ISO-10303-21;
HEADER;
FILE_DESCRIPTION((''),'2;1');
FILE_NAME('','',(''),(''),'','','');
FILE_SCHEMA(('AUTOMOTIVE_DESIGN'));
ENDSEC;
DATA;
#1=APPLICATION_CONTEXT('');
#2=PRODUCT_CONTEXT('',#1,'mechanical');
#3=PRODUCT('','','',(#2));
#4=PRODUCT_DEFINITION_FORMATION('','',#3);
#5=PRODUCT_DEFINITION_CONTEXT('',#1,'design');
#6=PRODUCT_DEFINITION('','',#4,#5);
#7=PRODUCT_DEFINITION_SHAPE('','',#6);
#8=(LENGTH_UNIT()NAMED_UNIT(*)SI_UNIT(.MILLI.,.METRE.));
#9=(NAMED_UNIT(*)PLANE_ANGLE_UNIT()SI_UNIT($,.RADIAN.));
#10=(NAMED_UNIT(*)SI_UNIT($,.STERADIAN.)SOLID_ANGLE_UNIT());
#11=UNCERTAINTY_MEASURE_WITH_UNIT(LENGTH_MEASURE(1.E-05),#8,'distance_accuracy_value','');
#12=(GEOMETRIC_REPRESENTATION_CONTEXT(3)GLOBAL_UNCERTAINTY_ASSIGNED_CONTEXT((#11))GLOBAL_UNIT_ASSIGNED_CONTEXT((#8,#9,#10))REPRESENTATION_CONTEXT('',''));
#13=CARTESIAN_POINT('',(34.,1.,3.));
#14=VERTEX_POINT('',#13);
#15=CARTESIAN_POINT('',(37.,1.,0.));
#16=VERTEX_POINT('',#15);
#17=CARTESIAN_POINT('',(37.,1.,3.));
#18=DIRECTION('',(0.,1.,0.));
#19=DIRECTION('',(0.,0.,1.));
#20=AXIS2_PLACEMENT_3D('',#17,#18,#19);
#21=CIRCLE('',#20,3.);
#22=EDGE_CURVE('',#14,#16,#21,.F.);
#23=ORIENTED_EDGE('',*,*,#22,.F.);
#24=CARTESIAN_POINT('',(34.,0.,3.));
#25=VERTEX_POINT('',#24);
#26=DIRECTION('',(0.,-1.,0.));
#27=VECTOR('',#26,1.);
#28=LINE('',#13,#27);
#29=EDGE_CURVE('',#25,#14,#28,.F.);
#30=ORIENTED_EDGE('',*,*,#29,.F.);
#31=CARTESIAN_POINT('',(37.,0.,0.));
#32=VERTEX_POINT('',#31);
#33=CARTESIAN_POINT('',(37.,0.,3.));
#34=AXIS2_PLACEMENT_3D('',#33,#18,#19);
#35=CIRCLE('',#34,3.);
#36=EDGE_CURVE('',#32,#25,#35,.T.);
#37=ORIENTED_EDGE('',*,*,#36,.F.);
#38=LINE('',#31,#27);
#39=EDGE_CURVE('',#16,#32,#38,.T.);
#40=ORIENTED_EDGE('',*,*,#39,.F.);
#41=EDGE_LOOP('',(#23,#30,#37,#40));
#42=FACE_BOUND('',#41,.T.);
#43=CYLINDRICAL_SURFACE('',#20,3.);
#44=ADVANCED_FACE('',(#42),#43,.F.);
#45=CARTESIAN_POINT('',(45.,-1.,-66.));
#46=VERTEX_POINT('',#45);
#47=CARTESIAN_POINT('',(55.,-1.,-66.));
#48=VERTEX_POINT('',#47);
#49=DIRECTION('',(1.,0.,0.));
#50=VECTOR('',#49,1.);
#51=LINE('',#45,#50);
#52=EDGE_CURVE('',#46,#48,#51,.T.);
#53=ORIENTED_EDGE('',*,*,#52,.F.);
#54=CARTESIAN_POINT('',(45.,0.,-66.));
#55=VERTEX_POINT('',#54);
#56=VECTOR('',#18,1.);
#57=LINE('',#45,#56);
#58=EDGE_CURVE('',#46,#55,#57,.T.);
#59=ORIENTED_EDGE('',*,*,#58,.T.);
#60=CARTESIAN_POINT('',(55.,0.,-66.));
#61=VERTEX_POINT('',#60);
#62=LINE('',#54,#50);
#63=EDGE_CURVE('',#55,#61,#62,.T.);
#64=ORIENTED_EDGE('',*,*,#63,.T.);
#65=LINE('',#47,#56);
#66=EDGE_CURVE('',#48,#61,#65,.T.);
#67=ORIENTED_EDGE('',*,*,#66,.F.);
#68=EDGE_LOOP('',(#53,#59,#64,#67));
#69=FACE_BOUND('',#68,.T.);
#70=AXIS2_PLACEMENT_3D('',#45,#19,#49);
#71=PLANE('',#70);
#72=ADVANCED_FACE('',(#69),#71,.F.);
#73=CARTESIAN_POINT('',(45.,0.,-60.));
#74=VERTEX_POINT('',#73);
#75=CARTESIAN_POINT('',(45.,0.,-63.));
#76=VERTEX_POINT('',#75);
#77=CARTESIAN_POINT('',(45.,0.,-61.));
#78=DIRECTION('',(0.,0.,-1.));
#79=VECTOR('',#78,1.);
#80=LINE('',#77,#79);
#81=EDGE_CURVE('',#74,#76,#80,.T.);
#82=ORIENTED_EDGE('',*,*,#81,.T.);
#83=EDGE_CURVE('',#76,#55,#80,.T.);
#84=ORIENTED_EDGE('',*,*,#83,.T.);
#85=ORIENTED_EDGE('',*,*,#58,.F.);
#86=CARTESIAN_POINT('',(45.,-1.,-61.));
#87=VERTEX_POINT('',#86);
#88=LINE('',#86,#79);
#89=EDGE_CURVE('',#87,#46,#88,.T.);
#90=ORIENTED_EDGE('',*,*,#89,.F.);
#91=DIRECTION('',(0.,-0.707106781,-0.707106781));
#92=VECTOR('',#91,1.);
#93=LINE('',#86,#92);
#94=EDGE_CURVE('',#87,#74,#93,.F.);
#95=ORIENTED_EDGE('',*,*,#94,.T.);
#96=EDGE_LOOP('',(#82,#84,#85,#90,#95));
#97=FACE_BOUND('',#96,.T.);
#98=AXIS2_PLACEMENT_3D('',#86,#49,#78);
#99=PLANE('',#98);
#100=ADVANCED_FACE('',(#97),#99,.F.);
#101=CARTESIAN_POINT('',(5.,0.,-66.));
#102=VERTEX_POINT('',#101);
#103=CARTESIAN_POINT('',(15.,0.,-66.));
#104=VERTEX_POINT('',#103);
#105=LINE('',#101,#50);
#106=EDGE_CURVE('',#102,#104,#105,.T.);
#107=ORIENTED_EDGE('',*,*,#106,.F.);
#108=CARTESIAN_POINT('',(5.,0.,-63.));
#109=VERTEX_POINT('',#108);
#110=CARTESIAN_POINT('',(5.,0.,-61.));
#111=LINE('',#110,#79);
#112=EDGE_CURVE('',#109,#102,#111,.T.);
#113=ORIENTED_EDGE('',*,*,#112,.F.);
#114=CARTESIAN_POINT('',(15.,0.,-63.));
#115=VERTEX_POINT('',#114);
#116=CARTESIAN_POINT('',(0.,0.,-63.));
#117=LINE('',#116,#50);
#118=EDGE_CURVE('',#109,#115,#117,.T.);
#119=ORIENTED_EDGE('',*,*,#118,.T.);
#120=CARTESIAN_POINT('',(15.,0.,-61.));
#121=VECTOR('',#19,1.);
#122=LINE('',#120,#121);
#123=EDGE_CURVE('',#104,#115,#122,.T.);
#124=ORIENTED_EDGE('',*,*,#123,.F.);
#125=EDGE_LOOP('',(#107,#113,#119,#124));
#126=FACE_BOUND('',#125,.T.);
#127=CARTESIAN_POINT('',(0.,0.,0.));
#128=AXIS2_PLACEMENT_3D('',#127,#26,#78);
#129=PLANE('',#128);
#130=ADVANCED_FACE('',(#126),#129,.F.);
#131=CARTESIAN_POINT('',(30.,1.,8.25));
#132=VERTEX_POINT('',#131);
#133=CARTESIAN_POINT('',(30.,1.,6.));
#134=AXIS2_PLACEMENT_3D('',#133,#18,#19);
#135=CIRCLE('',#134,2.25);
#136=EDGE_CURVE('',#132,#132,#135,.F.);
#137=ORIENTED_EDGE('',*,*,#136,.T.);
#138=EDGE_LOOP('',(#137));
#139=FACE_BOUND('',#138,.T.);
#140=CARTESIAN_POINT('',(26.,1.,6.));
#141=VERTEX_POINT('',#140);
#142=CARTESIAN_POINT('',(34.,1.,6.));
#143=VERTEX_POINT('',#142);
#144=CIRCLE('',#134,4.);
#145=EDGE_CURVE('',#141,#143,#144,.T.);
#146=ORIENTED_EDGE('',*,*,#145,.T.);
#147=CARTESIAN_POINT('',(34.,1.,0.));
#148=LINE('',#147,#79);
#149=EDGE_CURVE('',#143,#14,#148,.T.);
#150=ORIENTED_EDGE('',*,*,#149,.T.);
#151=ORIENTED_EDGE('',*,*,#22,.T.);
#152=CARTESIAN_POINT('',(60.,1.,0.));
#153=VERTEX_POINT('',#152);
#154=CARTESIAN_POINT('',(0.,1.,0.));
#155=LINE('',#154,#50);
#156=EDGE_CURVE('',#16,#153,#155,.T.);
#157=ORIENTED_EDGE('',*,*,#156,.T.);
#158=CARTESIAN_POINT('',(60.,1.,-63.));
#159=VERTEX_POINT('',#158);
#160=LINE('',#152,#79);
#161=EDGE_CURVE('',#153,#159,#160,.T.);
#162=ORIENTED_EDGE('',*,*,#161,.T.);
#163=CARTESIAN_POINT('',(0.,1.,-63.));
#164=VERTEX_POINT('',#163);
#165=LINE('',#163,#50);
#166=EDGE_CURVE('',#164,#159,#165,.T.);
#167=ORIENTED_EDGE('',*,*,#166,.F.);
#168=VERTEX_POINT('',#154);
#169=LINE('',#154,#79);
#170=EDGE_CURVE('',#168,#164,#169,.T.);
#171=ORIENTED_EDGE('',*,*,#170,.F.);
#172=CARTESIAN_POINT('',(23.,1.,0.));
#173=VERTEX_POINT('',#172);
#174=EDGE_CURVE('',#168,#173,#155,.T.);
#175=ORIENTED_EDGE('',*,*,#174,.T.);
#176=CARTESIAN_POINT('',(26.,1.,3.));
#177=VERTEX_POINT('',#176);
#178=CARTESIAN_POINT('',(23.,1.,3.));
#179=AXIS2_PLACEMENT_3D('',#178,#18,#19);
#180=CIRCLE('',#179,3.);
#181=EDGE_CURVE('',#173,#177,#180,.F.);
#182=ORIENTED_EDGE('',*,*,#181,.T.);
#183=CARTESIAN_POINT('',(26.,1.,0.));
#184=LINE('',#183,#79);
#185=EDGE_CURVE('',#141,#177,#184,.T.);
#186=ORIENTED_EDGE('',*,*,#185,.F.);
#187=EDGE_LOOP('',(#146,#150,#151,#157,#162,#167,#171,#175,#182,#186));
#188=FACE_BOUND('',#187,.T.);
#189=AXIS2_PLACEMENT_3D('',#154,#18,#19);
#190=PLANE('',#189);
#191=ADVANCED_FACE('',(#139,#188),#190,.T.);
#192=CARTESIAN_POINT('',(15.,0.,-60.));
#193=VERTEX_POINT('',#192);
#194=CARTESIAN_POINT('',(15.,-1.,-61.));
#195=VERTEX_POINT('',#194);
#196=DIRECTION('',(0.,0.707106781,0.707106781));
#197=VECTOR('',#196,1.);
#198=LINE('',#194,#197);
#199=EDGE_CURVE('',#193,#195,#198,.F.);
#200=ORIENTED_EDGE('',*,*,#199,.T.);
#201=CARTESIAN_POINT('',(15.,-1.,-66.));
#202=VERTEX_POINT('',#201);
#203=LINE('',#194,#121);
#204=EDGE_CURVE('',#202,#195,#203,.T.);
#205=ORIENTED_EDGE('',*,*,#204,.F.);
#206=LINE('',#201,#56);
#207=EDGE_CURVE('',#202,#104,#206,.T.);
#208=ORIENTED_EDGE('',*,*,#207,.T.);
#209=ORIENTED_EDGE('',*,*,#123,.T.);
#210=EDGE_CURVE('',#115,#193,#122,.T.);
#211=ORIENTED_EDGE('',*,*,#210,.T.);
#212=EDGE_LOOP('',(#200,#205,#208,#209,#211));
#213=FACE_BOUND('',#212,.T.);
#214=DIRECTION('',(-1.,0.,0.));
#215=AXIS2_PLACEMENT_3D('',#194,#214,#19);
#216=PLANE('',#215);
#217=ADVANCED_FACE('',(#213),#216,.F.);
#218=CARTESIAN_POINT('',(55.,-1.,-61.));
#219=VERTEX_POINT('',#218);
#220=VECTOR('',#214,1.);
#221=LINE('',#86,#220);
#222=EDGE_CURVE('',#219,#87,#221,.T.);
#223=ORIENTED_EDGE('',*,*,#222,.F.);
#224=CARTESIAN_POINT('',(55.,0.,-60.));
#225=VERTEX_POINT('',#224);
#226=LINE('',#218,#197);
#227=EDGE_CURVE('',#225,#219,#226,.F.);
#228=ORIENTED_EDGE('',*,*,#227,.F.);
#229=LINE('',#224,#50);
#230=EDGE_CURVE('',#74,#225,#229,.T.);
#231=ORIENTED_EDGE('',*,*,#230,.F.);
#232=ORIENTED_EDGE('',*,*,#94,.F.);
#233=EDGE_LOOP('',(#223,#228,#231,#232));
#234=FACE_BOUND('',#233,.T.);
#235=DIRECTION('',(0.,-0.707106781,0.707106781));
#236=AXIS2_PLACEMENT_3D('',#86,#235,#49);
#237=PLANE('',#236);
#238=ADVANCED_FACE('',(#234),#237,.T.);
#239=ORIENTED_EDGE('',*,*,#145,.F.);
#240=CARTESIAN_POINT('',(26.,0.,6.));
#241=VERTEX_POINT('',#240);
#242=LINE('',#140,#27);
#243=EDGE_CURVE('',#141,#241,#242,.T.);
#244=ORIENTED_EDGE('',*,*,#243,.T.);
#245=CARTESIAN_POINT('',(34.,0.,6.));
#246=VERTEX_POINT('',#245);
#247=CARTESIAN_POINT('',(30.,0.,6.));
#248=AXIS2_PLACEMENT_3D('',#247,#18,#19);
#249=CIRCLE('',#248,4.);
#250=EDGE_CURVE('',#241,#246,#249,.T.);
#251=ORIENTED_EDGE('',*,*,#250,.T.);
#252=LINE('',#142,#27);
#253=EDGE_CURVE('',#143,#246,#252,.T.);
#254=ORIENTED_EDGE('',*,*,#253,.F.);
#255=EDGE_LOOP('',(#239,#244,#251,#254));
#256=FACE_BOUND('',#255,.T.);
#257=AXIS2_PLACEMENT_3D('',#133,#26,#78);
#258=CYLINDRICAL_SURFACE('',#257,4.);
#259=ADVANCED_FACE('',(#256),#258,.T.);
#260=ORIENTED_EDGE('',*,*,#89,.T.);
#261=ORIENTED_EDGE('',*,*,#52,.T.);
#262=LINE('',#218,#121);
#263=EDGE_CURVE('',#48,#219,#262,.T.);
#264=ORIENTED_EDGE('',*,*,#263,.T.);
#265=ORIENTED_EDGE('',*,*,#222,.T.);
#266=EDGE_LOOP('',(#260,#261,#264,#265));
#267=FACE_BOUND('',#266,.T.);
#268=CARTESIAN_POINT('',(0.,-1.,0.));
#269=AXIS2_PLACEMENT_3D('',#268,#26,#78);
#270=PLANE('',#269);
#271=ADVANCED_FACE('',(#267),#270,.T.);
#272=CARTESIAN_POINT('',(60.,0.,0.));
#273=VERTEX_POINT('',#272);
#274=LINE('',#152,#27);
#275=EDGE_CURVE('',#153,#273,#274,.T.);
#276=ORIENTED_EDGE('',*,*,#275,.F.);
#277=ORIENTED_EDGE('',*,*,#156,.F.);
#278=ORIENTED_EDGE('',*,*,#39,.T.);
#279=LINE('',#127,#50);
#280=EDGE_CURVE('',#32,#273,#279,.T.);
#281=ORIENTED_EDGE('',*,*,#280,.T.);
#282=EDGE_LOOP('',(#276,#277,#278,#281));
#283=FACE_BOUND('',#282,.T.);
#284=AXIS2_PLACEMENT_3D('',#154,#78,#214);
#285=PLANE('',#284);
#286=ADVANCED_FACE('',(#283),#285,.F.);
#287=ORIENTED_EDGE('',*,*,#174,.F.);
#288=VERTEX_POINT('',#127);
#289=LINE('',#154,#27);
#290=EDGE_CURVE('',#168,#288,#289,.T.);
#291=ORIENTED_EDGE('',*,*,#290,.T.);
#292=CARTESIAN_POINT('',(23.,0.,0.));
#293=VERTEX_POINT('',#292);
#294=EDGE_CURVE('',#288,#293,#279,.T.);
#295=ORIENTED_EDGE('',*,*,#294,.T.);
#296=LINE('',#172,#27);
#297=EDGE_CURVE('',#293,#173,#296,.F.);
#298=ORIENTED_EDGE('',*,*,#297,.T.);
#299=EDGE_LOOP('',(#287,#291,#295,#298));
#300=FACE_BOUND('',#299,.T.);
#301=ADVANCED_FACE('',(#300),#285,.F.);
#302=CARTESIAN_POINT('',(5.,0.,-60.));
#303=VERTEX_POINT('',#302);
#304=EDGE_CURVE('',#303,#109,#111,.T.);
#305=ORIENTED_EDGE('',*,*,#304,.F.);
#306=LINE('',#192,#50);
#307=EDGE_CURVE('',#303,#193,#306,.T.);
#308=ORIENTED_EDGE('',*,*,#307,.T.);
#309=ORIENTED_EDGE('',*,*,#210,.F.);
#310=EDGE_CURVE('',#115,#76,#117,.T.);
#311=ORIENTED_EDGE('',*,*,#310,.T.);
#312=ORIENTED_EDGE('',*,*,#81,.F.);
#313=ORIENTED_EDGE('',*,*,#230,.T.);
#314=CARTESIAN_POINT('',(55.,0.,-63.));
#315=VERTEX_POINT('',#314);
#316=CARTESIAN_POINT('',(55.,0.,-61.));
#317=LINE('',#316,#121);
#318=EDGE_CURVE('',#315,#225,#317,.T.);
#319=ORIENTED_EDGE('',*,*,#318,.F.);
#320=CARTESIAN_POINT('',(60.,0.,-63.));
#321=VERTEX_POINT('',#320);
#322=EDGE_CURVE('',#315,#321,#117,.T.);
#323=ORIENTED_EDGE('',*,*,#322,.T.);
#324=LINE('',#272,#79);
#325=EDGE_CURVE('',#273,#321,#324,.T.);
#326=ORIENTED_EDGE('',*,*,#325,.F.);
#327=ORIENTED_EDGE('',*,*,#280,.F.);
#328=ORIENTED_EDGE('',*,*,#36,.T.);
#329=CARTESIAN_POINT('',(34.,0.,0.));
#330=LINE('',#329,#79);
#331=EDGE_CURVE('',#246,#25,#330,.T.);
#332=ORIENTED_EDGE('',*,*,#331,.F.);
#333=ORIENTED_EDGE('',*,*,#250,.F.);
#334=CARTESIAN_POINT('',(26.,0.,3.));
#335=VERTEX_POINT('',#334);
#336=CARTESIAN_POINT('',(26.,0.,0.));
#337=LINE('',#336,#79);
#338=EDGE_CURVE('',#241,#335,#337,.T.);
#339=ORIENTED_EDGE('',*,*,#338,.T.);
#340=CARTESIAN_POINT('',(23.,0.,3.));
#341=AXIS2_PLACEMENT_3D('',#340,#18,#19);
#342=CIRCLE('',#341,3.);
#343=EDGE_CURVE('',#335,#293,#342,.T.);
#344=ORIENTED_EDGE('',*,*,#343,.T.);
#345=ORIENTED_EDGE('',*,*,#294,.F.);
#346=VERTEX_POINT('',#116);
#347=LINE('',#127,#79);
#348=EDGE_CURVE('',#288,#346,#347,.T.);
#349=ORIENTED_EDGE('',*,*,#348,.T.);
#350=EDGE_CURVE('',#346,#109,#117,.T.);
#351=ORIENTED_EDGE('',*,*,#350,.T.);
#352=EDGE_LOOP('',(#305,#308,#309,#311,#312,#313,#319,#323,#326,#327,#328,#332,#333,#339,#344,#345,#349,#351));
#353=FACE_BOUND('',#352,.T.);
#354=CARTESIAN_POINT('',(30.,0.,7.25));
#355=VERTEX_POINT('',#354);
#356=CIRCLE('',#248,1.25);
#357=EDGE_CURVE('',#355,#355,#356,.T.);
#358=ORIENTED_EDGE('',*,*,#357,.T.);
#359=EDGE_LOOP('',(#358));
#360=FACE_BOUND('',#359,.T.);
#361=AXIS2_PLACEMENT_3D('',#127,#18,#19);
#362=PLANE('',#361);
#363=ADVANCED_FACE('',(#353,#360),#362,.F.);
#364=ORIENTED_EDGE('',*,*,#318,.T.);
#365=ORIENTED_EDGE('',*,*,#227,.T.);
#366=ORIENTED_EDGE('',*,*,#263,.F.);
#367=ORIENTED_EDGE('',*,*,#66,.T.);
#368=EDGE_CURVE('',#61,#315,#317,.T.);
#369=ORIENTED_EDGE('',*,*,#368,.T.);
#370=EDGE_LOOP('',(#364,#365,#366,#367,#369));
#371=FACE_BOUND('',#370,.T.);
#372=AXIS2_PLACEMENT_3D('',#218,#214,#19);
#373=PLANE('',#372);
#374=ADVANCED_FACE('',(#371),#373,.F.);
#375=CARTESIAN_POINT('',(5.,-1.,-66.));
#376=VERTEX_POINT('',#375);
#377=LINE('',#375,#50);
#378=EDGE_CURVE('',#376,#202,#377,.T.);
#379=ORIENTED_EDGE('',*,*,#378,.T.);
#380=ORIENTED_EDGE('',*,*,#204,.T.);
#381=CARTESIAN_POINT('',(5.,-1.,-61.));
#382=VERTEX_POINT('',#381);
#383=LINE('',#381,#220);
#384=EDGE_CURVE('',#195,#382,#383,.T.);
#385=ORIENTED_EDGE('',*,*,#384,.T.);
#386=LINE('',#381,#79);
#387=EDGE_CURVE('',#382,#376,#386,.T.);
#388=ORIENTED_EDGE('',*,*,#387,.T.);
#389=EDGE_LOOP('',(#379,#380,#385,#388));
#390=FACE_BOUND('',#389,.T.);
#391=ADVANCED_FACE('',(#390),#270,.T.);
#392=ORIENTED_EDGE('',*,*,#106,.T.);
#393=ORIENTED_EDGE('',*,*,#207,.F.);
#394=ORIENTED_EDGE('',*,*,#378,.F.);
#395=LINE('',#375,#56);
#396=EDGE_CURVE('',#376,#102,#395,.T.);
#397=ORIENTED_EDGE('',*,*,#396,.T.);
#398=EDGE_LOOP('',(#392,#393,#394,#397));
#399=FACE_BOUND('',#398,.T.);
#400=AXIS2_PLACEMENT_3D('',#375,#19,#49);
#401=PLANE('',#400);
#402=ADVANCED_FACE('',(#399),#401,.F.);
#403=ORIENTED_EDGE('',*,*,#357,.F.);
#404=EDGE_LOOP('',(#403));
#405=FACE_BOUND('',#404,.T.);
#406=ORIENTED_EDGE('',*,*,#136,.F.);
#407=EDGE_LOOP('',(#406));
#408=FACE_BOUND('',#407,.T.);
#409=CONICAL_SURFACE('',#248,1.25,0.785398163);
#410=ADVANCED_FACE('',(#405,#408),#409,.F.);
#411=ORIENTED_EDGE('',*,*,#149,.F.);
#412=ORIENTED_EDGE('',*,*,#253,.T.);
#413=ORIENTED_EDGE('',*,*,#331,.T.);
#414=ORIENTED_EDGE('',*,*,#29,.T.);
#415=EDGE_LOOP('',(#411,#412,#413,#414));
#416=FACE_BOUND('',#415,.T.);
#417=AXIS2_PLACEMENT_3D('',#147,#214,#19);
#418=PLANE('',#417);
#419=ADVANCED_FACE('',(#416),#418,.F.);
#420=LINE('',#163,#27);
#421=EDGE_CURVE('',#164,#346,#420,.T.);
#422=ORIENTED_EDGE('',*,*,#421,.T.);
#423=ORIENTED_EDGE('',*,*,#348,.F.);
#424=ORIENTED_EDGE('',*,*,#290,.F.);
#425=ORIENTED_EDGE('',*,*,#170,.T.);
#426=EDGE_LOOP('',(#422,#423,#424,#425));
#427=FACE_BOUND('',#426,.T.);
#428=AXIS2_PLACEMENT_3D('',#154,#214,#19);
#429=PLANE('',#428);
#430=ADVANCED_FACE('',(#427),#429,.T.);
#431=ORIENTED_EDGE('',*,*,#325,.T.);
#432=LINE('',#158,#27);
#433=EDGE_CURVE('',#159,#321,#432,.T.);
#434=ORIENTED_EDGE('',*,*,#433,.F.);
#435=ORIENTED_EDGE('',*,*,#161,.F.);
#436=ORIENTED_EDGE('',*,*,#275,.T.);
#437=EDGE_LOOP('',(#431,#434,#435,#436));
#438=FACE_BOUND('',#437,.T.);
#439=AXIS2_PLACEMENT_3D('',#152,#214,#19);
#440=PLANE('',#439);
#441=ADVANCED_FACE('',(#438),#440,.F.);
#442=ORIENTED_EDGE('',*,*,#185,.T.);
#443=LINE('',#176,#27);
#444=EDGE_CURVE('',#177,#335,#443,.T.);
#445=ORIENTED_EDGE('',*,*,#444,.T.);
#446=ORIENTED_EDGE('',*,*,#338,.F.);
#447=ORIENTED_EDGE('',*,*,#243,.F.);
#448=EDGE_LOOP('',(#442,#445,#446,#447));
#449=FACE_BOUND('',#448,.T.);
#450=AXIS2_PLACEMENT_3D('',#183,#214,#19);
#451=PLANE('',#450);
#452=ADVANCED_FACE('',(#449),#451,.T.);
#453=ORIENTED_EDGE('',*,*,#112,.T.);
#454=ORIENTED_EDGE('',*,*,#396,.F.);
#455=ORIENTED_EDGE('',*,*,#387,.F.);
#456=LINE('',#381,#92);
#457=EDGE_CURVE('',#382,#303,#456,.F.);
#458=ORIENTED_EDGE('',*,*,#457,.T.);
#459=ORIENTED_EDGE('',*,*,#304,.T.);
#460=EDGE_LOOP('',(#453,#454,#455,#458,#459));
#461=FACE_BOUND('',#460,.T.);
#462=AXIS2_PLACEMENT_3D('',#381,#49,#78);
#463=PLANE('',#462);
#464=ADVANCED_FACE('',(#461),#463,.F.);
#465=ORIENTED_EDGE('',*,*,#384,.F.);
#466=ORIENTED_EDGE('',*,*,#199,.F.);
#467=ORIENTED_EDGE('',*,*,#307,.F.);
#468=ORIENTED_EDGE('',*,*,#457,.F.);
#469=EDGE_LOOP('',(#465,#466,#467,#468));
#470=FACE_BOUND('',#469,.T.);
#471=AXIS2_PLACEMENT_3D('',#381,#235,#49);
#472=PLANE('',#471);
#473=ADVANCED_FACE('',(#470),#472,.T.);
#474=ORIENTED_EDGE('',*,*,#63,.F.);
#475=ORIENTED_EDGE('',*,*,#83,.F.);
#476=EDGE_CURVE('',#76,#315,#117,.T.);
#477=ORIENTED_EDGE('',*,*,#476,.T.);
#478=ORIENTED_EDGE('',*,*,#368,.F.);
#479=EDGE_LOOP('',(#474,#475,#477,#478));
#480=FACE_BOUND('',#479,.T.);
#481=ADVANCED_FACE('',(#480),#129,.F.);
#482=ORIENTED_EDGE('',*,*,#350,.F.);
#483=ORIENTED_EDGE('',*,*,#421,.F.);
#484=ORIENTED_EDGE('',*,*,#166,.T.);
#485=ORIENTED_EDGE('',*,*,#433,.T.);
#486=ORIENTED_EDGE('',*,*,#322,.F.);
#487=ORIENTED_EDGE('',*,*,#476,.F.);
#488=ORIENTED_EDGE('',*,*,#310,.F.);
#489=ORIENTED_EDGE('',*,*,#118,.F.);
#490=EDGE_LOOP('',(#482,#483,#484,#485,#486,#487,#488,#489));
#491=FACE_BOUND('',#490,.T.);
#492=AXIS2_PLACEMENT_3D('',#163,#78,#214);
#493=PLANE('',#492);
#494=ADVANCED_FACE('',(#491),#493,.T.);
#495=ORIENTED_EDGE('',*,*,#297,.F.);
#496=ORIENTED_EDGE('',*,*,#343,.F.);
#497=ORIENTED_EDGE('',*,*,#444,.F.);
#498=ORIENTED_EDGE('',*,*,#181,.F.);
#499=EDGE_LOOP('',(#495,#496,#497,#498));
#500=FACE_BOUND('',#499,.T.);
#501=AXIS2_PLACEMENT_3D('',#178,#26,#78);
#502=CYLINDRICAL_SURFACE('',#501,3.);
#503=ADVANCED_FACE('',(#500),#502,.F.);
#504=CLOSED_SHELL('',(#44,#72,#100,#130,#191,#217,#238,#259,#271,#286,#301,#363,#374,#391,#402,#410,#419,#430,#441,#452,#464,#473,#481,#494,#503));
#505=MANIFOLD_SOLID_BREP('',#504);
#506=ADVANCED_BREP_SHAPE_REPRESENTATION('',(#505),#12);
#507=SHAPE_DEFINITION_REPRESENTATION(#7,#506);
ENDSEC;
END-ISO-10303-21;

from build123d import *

# Parameters (mm, degrees)
SKETCH1_W           = 60
SKETCH1_H           = 63
SKETCH1_R           = 4
SKETCH1_R_2         = 1.25
BOSS_EXTRUDE1_DEPTH = 1
FILLET1_R           = 3
SKETCH2_W           = 10
SKETCH2_H           = 5
BOSS_EXTRUDE2_DEPTH = 1
CHAMFER1_SIZE       = 1
CHAMFER2_SIZE       = 1


with BuildPart() as part:
    # Sketch1 → Boss-Extrude1 (new body)
    # profile 1 of 3: a face of its own
    with BuildSketch(Plane(origin=(0, 0, 0), x_dir=(1, 0, 0), z_dir=(0, 1, 0))):
        with Locations((30, 31.5)):
            Rectangle(SKETCH1_W, SKETCH1_H)
    # profile 2 of 3: a face of its own
    with BuildSketch(Plane(origin=(0, 0, 0), x_dir=(1, 0, 0), z_dir=(0, 1, 0))):
        with BuildLine():
            Line((26, 0), (26, -6))
            ThreePointArc((26, -6), (30, -2), (34, -6))
            Line((34, -6), (34, 0))
            Line((34, 0), (26, 0))
        make_face()
    # profile 3 of 3: a face of its own
    with BuildSketch(Plane(origin=(0, 0, 0), x_dir=(1, 0, 0), z_dir=(0, 1, 0))):
        with Locations((30, -6)):
            Circle(SKETCH1_R)
        with Locations(Location((30, -6, 0), (0, 0, 270))):
            Circle(SKETCH1_R_2, mode=Mode.SUBTRACT)
    extrude(amount=BOSS_EXTRUDE1_DEPTH)

    # Fillet1
    fillet1_edges = [part.edges().sort_by_distance(p)[0] for p in [
        (34, 0.5, 0),
        (26, 0.5, 0),
    ]]
    fillet(fillet1_edges, radius=FILLET1_R)

    # Sketch2 → Boss-Extrude2 (add)
    with BuildSketch(Plane(origin=(0, 0, 0), x_dir=(-1, 0, 0), z_dir=(0, -1, 0))):
        with Locations((-10, 63.5)):
            Rectangle(SKETCH2_W, SKETCH2_H)
        with Locations((-50, 63.5)):
            Rectangle(SKETCH2_W, SKETCH2_H)
    extrude(amount=BOSS_EXTRUDE2_DEPTH)

    # Chamfer1
    chamfer1_edges = [part.edges().sort_by_distance(p)[0] for p in [
        (50, 0, -61),
        (10, 0, -61),
    ]]
    chamfer(chamfer1_edges, length=CHAMFER1_SIZE - 0.0001)  # a hair under: the kernel refuses the full size

    # Chamfer2
    chamfer2_edges = [part.edges().sort_by_distance(p)[0] for p in [
        (30, 1, 4.75),
    ]]
    chamfer(chamfer2_edges, length=CHAMFER2_SIZE - 0.0001)  # a hair under: the kernel refuses the full size


solid = part.part
